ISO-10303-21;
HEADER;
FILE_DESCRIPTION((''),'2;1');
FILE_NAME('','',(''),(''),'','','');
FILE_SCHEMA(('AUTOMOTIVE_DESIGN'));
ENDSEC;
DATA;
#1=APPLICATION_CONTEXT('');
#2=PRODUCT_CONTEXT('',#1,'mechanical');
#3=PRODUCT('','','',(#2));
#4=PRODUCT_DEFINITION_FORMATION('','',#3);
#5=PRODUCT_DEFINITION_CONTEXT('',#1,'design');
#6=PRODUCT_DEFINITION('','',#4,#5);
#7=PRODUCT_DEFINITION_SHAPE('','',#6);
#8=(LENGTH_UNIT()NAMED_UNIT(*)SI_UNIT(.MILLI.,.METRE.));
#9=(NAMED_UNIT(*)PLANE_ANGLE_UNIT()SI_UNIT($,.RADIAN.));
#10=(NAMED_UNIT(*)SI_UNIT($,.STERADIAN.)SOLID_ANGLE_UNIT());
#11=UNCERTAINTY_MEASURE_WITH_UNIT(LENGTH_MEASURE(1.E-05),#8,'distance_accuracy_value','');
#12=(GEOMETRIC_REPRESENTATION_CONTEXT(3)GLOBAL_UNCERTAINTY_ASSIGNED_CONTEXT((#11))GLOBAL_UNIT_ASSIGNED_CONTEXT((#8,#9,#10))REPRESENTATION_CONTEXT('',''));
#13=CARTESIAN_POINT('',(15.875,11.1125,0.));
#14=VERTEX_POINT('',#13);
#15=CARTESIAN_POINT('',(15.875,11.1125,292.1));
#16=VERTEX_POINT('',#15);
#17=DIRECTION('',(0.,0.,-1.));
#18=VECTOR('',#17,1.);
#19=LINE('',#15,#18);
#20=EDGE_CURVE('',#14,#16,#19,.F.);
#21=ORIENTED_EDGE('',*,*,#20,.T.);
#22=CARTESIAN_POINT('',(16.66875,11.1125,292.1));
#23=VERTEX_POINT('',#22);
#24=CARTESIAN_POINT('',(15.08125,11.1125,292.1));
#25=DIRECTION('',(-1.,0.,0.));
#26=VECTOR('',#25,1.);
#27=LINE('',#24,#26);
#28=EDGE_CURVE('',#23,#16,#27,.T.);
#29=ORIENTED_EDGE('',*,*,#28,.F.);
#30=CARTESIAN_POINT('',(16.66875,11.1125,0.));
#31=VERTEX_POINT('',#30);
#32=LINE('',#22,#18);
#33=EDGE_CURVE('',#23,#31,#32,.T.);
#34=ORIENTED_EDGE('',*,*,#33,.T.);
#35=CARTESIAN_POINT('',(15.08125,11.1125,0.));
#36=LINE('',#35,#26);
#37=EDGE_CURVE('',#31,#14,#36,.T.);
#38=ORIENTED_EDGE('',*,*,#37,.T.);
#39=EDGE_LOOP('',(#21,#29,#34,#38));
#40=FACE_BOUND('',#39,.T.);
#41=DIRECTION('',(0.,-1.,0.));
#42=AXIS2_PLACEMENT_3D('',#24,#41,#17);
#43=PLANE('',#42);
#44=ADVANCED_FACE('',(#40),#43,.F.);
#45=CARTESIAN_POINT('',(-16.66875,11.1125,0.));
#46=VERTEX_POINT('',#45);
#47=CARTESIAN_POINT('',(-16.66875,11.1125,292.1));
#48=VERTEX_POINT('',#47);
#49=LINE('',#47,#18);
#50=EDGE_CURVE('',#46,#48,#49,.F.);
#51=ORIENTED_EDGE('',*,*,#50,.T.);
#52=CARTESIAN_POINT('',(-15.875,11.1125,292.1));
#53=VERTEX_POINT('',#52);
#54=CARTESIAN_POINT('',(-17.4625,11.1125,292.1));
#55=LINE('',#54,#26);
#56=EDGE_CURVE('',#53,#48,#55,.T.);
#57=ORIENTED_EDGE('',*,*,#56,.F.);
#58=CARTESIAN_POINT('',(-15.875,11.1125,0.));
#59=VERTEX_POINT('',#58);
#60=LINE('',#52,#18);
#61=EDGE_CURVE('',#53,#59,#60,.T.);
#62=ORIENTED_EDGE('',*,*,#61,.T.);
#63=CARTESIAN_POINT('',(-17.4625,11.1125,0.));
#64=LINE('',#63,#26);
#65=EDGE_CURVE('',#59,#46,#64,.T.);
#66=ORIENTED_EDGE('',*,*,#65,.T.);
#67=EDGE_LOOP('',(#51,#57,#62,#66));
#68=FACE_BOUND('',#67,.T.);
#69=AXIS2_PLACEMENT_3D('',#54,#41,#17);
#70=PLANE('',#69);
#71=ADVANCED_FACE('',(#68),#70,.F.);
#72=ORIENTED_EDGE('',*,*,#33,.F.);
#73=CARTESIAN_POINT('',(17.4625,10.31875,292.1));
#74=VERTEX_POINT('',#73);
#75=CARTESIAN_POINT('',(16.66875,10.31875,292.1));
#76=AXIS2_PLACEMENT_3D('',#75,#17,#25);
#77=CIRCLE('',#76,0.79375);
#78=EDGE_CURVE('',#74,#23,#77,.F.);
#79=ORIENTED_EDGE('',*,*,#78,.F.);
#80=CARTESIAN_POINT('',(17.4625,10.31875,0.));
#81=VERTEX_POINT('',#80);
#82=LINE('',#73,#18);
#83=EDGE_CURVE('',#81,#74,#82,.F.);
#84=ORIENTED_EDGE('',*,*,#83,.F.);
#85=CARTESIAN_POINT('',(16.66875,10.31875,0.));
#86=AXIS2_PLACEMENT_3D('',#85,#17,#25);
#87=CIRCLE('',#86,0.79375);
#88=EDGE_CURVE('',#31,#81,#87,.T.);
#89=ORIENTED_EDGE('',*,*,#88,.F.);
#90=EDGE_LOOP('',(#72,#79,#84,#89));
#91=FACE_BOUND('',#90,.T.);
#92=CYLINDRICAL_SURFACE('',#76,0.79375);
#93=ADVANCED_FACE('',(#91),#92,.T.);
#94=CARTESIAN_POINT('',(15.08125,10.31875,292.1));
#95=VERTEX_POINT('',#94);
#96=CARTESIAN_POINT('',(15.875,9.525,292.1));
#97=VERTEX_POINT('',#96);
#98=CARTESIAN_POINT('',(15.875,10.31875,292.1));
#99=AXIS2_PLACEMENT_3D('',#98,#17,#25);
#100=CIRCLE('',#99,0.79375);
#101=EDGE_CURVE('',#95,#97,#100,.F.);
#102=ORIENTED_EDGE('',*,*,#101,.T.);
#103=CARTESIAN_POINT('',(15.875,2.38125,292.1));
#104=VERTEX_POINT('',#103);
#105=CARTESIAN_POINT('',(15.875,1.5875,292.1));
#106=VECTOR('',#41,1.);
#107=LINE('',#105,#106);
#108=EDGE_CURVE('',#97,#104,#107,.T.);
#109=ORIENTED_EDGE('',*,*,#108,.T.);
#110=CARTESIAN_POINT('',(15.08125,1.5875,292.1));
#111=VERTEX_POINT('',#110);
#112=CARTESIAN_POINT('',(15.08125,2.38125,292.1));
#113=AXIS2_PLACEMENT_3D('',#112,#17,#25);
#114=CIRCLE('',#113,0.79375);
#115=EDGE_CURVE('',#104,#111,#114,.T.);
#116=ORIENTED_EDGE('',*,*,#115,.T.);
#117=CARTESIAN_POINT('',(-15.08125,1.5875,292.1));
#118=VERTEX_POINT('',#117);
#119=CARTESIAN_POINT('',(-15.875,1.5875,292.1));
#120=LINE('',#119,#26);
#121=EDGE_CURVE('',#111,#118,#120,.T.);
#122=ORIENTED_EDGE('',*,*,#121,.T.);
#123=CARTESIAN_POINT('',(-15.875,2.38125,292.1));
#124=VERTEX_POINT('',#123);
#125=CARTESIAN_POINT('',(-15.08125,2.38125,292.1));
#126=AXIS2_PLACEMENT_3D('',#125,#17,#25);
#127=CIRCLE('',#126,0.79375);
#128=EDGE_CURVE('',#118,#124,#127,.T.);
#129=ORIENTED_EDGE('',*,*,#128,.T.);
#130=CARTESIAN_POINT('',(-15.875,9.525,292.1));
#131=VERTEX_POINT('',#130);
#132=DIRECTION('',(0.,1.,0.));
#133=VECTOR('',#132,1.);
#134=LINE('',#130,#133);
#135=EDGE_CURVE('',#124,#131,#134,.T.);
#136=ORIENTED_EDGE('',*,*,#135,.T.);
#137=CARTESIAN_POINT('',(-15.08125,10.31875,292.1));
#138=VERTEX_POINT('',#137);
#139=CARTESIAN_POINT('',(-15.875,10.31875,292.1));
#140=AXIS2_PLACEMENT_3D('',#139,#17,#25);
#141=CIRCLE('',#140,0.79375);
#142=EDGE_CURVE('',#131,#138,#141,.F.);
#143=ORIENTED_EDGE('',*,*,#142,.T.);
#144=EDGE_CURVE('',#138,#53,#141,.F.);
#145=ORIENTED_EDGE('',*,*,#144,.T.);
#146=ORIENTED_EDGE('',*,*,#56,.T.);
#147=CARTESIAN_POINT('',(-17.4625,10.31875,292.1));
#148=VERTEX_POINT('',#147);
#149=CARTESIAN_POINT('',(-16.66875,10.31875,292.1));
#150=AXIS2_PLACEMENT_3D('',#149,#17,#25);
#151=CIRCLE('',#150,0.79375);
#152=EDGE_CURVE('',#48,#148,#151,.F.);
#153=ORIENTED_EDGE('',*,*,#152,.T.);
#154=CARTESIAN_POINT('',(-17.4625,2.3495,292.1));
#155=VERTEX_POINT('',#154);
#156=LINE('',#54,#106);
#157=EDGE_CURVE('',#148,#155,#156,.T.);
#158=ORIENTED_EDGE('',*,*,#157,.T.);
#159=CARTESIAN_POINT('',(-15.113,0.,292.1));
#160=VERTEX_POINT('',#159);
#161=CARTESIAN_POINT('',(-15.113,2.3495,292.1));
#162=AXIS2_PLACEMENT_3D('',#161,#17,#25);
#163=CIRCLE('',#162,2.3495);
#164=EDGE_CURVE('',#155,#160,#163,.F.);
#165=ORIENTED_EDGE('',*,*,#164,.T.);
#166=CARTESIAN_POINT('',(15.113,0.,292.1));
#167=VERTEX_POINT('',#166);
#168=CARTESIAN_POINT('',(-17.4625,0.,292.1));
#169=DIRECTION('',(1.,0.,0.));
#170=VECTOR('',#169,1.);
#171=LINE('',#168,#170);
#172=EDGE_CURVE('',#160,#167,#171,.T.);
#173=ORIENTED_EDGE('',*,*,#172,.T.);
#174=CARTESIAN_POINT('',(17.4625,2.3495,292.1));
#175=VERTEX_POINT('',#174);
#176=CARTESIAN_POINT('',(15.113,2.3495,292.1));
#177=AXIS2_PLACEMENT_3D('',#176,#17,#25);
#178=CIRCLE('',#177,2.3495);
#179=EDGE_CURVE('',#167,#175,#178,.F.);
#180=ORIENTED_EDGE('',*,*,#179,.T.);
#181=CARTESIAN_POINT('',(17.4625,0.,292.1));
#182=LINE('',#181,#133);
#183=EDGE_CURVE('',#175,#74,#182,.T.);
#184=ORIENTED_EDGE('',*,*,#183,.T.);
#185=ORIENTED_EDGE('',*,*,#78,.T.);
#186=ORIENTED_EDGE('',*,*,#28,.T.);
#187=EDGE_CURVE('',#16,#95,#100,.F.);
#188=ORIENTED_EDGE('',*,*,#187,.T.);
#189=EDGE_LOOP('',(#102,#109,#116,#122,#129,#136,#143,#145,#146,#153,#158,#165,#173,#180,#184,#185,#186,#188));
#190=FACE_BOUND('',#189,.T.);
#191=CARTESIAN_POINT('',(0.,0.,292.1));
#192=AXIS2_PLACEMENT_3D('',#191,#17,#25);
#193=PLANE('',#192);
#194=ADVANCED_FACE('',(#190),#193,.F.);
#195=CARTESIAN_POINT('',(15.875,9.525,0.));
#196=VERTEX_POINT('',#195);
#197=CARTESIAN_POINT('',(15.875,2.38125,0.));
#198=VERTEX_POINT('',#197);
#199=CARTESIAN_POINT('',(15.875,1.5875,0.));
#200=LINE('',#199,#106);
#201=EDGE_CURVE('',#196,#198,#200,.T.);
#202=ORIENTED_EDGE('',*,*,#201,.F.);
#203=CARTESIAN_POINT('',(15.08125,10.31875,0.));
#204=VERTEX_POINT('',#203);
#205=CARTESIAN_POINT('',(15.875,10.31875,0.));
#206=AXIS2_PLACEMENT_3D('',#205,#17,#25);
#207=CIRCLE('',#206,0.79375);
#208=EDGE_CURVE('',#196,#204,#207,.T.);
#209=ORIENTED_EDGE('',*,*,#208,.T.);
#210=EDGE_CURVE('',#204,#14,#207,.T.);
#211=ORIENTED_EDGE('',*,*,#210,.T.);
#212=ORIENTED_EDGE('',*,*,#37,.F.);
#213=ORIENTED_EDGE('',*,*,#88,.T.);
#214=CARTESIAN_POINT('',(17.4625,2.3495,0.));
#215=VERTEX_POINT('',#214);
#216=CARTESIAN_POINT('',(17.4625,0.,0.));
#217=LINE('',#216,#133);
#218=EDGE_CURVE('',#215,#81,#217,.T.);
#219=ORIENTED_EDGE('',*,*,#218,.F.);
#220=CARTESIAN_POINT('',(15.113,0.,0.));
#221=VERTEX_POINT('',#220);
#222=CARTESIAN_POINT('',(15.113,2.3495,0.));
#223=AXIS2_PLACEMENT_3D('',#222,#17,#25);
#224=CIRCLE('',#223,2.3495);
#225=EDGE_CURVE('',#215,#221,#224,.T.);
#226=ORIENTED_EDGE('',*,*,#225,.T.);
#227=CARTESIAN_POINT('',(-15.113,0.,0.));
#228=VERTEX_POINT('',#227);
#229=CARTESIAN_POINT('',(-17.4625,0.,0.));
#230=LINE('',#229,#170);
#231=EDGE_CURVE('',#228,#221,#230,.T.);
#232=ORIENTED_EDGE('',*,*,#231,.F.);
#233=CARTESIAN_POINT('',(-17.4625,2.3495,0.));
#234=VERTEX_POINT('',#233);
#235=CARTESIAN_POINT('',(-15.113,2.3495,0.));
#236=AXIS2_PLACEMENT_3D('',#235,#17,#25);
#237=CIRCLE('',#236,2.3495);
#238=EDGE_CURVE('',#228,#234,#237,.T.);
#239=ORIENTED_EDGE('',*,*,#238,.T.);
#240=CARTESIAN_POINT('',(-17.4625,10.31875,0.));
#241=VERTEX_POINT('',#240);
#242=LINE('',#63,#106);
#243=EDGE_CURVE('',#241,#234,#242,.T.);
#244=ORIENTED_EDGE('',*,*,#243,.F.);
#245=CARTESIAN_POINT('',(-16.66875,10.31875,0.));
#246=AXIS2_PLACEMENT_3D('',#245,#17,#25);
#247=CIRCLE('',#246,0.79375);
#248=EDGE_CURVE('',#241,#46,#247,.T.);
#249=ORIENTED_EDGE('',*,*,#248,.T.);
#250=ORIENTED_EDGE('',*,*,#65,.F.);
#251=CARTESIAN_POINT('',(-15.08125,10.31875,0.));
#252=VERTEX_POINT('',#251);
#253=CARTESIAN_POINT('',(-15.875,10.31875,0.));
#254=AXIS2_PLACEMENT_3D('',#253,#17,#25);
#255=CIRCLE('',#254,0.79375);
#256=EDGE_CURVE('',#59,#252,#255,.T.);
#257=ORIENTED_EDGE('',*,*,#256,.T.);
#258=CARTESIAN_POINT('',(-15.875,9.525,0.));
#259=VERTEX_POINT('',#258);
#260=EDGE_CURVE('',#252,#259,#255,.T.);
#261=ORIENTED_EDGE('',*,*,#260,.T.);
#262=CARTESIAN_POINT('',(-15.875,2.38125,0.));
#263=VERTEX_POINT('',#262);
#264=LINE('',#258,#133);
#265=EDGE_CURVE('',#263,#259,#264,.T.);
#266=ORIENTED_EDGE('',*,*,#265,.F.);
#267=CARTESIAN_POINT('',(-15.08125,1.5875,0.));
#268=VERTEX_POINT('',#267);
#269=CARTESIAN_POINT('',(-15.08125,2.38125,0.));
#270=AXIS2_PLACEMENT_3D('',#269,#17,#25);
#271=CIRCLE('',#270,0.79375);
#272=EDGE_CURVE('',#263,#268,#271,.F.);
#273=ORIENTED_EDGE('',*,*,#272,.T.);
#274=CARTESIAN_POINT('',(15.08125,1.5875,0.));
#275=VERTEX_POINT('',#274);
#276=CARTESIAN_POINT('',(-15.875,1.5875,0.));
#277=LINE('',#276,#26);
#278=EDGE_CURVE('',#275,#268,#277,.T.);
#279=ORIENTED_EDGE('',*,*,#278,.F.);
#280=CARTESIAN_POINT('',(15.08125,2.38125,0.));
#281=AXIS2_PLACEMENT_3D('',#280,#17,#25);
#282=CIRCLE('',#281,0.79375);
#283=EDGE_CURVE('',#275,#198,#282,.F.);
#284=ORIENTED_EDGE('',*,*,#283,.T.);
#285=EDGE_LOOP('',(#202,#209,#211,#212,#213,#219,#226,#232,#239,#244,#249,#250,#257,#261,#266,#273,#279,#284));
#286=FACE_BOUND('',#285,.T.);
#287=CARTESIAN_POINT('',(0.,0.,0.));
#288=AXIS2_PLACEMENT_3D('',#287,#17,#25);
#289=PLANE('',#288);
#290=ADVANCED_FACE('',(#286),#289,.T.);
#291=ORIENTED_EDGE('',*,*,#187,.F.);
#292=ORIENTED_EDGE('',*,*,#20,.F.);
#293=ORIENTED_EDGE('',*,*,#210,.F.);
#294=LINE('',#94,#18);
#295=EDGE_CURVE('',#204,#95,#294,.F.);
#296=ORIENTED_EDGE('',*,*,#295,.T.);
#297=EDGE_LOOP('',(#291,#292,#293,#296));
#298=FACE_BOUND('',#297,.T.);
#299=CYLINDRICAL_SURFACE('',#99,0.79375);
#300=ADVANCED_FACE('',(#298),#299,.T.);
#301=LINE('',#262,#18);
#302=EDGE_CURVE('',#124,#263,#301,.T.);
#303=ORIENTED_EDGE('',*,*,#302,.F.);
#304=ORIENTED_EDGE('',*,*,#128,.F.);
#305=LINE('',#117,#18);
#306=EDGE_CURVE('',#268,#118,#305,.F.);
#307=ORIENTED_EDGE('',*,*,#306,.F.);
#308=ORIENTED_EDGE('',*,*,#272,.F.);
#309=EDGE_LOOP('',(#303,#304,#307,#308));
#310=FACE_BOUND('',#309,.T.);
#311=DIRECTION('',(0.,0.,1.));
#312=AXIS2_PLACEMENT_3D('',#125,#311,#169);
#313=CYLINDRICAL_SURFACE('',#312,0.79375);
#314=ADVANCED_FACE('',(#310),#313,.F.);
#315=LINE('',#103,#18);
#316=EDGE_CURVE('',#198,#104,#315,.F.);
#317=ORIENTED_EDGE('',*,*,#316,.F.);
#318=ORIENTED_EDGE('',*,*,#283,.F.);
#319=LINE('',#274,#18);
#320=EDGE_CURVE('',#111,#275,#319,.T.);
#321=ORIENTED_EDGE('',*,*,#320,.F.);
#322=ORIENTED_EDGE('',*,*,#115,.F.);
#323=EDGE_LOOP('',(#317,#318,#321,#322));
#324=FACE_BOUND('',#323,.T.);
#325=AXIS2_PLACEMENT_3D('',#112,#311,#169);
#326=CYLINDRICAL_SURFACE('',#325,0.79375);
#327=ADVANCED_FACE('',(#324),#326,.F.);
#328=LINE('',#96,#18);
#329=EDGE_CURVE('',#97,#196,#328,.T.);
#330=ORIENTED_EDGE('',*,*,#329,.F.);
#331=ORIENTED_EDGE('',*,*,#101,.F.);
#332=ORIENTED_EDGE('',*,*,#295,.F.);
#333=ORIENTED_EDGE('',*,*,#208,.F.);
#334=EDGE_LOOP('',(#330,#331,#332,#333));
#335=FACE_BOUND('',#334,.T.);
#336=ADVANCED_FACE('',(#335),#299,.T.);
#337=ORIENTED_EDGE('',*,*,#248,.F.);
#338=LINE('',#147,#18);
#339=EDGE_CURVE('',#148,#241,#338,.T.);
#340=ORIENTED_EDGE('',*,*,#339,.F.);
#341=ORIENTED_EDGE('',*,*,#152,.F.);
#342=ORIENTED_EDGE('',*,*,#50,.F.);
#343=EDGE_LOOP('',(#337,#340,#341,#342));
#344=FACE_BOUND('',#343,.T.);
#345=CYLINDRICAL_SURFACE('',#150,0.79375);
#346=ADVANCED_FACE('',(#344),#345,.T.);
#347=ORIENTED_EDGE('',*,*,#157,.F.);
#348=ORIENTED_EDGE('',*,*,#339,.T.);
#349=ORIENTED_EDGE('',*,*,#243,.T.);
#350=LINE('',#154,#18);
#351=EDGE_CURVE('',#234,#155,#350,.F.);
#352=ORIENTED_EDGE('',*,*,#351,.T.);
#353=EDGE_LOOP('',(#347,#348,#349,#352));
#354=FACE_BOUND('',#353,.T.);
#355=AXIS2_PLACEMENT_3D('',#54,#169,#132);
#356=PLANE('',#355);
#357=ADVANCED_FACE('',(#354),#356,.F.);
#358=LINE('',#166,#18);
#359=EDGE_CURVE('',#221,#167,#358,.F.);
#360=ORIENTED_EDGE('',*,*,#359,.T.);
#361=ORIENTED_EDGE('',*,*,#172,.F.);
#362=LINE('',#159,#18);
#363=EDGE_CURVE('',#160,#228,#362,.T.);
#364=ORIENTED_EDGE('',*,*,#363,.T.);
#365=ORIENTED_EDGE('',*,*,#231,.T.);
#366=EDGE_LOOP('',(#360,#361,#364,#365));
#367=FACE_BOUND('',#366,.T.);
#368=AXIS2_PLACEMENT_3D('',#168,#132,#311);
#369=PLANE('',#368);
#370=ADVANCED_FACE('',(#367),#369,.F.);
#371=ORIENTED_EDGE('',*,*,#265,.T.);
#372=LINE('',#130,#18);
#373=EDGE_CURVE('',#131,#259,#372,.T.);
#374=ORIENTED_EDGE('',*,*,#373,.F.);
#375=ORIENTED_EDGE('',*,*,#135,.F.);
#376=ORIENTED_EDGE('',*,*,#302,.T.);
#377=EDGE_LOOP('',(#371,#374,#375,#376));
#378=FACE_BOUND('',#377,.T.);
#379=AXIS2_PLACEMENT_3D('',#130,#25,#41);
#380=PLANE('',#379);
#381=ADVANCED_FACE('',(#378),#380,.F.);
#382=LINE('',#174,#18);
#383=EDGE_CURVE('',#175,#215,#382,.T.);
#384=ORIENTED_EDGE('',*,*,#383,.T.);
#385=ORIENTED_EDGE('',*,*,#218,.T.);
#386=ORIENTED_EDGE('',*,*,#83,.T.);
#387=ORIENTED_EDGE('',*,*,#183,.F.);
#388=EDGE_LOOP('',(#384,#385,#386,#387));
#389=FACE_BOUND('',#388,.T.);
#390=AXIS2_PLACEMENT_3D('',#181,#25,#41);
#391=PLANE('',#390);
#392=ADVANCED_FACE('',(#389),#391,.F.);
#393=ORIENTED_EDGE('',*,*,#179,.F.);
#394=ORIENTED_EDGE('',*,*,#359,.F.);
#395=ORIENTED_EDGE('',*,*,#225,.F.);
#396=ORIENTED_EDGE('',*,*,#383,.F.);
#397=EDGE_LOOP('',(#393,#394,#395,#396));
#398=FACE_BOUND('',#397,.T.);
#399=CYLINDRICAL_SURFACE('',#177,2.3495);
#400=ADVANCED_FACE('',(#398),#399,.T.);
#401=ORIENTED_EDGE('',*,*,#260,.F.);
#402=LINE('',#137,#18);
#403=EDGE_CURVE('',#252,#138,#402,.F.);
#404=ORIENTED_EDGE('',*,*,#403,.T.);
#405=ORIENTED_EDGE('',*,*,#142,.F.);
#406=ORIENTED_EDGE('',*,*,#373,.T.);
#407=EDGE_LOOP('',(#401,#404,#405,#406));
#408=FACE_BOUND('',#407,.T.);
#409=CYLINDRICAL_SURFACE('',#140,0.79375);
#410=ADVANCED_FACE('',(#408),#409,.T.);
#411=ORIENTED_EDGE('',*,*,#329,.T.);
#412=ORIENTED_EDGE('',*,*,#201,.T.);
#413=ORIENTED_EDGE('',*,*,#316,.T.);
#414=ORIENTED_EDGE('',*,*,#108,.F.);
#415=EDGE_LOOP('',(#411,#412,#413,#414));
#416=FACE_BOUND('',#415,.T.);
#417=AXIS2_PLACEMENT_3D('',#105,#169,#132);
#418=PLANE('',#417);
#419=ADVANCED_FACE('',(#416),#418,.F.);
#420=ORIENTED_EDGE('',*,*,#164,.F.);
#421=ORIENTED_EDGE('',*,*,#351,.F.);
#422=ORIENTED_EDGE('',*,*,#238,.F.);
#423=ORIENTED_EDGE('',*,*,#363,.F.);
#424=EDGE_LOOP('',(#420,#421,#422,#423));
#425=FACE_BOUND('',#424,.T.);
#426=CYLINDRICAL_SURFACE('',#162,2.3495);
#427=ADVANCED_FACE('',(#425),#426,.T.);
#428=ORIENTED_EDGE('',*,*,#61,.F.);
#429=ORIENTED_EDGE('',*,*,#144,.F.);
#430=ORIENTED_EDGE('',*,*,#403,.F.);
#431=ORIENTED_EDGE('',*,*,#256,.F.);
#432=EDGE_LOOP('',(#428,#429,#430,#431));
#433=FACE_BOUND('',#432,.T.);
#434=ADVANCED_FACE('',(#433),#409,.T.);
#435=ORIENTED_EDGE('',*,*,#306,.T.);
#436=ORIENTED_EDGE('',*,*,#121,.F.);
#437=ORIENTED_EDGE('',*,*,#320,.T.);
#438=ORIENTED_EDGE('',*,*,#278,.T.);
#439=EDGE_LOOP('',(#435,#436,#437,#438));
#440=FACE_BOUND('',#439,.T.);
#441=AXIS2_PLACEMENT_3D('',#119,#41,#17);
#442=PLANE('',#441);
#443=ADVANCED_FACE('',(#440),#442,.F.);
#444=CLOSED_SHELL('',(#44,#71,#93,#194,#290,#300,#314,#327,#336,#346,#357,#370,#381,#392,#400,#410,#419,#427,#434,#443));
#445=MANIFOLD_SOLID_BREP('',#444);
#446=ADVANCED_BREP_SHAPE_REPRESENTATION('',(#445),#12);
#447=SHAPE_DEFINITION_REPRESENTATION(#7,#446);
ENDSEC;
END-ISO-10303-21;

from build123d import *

# Parameters (mm, degrees)
BOSS_EXTRUDE1_DEPTH = 292.1
FILLET1_R           = 0.79375
FILLET2_R           = 2.3495


with BuildPart() as part:
    # Sketch1 → Boss-Extrude1 (new body)
    with BuildSketch(Plane.XY):
        Polygon((-17.4625, 11.1125), (-17.4625, 0), (17.4625, 0), (17.4625, 11.1125), (15.08125, 11.1125), (15.08125, 9.525), (15.875, 9.525), (15.875, 1.5875), (-15.875, 1.5875), (-15.875, 9.525), (-15.08125, 9.525), (-15.08125, 11.1125), align=None)
    extrude(amount=BOSS_EXTRUDE1_DEPTH)

    # Fillet1
    fillet1_edges = [part.edges().sort_by_distance(p)[0] for p in [
        (15.875, 1.5875, 146.05),
        (-15.875, 1.5875, 146.05),
        (-15.08125, 9.525, 146.05),
        (-15.08125, 11.1125, 146.05),
        (-17.4625, 11.1125, 146.05),
        (17.4625, 11.1125, 146.05),
        (15.08125, 11.1125, 146.05),
        (15.08125, 9.525, 146.05),
    ]]
    fillet(fillet1_edges, radius=FILLET1_R - 0.0001)  # a hair under: the kernel refuses the full size

    # Fillet2
    fillet2_edges = [part.edges().sort_by_distance(p)[0] for p in [
        (17.4625, 0, 146.05),
        (-17.4625, 0, 146.05),
    ]]
    fillet(fillet2_edges, radius=FILLET2_R)


solid = part.part
